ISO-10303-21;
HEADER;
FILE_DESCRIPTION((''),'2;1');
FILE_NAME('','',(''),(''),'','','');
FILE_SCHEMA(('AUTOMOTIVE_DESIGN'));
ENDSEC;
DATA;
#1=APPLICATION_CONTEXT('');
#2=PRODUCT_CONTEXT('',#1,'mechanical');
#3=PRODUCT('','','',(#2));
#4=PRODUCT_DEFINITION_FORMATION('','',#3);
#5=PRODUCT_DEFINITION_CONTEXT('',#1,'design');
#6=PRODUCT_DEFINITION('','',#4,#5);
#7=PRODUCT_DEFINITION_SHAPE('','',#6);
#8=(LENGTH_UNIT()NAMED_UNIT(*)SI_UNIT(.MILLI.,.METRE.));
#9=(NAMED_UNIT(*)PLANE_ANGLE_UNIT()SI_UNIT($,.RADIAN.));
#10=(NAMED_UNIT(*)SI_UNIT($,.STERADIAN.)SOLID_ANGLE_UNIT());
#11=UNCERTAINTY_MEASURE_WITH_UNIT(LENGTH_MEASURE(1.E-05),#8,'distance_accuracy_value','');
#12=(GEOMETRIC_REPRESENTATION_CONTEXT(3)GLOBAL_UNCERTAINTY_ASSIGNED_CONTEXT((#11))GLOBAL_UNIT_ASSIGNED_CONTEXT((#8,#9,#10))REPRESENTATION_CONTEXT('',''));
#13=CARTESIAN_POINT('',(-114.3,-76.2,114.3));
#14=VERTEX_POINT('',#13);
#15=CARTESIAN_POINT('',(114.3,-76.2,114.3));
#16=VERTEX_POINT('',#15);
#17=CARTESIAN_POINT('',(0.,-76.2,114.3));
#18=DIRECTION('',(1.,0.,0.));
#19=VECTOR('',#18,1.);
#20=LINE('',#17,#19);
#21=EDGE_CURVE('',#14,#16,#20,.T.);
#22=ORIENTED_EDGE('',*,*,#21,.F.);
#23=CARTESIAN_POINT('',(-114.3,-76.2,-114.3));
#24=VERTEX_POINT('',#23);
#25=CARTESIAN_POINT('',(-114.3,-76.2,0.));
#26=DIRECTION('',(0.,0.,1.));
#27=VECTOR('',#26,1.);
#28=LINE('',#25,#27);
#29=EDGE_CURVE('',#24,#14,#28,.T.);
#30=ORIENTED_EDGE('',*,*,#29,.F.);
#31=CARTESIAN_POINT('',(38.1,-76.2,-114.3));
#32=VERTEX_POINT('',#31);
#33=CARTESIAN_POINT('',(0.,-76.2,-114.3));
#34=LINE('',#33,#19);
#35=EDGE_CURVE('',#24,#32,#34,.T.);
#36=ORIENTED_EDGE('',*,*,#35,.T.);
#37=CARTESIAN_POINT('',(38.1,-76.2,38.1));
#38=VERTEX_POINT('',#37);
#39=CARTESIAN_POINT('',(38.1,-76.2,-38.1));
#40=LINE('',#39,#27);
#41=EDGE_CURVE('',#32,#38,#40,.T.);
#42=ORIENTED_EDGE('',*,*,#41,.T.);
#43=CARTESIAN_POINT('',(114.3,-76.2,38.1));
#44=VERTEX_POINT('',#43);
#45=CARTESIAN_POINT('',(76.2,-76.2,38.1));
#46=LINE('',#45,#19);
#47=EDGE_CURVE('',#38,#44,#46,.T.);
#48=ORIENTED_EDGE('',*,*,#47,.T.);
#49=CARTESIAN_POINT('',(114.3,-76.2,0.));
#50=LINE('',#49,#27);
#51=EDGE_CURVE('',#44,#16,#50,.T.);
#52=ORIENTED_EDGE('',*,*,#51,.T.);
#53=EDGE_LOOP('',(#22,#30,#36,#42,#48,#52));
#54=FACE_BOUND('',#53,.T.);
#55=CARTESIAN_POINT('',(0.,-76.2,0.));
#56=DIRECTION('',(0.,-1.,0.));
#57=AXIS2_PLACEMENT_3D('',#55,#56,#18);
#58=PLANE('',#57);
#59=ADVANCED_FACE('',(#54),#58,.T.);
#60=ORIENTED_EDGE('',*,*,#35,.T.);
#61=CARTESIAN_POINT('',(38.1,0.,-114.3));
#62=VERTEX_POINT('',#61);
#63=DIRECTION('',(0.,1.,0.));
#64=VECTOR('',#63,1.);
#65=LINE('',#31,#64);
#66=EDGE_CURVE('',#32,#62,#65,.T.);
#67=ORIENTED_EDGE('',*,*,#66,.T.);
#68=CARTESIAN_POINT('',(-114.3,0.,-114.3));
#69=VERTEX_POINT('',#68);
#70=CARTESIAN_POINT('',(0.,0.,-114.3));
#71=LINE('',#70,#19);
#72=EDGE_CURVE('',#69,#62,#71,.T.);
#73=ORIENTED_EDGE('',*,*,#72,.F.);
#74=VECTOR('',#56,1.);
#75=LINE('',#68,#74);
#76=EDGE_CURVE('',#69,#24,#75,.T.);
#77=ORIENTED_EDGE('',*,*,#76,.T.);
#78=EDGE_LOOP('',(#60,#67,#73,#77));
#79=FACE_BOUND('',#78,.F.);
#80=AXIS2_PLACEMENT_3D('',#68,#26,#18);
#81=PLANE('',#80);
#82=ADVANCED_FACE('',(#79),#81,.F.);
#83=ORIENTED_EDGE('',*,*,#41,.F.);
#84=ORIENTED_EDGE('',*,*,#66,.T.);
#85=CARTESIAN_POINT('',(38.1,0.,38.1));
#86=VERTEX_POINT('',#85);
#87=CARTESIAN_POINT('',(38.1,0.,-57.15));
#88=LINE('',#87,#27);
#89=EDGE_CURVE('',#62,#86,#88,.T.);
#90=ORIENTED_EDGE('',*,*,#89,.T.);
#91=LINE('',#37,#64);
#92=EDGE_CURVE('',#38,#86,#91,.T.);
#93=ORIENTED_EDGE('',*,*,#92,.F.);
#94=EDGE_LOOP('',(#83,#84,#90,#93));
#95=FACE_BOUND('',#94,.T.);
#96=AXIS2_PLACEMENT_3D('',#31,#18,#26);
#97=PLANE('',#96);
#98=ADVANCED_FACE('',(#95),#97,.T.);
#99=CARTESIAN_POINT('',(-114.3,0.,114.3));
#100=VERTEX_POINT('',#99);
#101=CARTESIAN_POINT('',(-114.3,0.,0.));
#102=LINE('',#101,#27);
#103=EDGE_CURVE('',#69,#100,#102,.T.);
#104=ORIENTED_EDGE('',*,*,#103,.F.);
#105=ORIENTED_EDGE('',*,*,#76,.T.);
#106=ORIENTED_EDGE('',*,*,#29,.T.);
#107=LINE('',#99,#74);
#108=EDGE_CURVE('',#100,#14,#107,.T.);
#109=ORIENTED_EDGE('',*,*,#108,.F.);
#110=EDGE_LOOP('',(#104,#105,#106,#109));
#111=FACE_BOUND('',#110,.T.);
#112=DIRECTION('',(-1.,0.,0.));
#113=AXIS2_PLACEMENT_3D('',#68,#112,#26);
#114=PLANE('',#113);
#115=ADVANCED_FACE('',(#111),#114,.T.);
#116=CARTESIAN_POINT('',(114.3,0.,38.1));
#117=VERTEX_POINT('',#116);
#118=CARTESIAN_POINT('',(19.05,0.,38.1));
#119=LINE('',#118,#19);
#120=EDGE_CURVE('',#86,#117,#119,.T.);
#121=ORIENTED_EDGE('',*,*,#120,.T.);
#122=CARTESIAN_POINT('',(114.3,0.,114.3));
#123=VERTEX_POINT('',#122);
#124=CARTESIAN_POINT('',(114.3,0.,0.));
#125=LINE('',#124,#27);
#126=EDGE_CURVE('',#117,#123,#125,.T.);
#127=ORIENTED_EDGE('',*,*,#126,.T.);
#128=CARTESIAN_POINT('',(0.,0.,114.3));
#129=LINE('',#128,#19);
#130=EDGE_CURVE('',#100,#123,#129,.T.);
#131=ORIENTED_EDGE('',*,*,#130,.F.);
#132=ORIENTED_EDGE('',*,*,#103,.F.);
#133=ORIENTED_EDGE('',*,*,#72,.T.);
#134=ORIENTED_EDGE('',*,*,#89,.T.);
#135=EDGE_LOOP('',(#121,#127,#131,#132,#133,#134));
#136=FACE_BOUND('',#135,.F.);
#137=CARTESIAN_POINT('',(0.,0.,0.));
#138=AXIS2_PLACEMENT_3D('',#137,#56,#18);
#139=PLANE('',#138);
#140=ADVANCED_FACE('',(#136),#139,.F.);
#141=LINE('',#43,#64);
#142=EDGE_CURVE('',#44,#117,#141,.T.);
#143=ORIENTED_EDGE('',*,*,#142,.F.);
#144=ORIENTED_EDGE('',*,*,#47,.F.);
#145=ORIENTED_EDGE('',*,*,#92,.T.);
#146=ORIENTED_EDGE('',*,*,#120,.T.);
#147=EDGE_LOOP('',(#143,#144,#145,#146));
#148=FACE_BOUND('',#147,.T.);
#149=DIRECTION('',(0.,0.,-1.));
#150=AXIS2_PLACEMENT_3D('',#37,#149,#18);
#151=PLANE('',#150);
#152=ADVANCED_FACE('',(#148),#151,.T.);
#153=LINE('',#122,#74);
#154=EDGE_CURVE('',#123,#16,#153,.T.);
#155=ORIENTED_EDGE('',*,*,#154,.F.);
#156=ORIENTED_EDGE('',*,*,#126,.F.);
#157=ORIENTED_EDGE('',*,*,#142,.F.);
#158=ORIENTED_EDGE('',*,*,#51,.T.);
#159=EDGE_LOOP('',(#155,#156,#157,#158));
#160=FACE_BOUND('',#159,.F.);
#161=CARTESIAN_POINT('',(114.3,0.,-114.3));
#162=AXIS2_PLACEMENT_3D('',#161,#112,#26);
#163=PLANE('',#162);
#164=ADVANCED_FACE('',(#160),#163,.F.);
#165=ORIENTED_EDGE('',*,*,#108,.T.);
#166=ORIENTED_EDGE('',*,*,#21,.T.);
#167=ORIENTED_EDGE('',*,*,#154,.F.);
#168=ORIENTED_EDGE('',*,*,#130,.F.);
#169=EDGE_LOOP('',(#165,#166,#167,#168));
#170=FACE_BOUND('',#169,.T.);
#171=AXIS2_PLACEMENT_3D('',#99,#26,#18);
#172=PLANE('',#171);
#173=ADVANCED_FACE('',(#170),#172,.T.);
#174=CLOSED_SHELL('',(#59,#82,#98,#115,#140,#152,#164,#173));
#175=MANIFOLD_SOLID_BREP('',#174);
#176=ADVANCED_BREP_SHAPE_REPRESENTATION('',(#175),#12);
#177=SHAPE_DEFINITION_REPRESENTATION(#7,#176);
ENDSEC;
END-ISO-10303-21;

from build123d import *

# Parameters (mm, degrees)
F1_W     = 228.6
F1_H     = 228.6
F2_DEPTH = 76.2
F3_W     = 76.2
F3_H     = 152.4
F4_DEPTH = 76.201


# Not quite as in the source:
# - a variable given as a bare number and used for a length is read in inches; the dataset says mm whatever the document's units were


with BuildPart() as f2:
    # F1 (on Front) → F2 (new body)
    with BuildSketch(Plane.XZ):
        Rectangle(F1_W, F1_H)
    extrude(amount=F2_DEPTH)

    # F3 (on face) → F4 (cut, through all)
    with BuildSketch(Plane.XZ.offset(76.2)):
        with Locations((76.2, -38.1)):
            Rectangle(F3_W, F3_H)
    extrude(amount=-F4_DEPTH, mode=Mode.SUBTRACT)


solid = f2.part
